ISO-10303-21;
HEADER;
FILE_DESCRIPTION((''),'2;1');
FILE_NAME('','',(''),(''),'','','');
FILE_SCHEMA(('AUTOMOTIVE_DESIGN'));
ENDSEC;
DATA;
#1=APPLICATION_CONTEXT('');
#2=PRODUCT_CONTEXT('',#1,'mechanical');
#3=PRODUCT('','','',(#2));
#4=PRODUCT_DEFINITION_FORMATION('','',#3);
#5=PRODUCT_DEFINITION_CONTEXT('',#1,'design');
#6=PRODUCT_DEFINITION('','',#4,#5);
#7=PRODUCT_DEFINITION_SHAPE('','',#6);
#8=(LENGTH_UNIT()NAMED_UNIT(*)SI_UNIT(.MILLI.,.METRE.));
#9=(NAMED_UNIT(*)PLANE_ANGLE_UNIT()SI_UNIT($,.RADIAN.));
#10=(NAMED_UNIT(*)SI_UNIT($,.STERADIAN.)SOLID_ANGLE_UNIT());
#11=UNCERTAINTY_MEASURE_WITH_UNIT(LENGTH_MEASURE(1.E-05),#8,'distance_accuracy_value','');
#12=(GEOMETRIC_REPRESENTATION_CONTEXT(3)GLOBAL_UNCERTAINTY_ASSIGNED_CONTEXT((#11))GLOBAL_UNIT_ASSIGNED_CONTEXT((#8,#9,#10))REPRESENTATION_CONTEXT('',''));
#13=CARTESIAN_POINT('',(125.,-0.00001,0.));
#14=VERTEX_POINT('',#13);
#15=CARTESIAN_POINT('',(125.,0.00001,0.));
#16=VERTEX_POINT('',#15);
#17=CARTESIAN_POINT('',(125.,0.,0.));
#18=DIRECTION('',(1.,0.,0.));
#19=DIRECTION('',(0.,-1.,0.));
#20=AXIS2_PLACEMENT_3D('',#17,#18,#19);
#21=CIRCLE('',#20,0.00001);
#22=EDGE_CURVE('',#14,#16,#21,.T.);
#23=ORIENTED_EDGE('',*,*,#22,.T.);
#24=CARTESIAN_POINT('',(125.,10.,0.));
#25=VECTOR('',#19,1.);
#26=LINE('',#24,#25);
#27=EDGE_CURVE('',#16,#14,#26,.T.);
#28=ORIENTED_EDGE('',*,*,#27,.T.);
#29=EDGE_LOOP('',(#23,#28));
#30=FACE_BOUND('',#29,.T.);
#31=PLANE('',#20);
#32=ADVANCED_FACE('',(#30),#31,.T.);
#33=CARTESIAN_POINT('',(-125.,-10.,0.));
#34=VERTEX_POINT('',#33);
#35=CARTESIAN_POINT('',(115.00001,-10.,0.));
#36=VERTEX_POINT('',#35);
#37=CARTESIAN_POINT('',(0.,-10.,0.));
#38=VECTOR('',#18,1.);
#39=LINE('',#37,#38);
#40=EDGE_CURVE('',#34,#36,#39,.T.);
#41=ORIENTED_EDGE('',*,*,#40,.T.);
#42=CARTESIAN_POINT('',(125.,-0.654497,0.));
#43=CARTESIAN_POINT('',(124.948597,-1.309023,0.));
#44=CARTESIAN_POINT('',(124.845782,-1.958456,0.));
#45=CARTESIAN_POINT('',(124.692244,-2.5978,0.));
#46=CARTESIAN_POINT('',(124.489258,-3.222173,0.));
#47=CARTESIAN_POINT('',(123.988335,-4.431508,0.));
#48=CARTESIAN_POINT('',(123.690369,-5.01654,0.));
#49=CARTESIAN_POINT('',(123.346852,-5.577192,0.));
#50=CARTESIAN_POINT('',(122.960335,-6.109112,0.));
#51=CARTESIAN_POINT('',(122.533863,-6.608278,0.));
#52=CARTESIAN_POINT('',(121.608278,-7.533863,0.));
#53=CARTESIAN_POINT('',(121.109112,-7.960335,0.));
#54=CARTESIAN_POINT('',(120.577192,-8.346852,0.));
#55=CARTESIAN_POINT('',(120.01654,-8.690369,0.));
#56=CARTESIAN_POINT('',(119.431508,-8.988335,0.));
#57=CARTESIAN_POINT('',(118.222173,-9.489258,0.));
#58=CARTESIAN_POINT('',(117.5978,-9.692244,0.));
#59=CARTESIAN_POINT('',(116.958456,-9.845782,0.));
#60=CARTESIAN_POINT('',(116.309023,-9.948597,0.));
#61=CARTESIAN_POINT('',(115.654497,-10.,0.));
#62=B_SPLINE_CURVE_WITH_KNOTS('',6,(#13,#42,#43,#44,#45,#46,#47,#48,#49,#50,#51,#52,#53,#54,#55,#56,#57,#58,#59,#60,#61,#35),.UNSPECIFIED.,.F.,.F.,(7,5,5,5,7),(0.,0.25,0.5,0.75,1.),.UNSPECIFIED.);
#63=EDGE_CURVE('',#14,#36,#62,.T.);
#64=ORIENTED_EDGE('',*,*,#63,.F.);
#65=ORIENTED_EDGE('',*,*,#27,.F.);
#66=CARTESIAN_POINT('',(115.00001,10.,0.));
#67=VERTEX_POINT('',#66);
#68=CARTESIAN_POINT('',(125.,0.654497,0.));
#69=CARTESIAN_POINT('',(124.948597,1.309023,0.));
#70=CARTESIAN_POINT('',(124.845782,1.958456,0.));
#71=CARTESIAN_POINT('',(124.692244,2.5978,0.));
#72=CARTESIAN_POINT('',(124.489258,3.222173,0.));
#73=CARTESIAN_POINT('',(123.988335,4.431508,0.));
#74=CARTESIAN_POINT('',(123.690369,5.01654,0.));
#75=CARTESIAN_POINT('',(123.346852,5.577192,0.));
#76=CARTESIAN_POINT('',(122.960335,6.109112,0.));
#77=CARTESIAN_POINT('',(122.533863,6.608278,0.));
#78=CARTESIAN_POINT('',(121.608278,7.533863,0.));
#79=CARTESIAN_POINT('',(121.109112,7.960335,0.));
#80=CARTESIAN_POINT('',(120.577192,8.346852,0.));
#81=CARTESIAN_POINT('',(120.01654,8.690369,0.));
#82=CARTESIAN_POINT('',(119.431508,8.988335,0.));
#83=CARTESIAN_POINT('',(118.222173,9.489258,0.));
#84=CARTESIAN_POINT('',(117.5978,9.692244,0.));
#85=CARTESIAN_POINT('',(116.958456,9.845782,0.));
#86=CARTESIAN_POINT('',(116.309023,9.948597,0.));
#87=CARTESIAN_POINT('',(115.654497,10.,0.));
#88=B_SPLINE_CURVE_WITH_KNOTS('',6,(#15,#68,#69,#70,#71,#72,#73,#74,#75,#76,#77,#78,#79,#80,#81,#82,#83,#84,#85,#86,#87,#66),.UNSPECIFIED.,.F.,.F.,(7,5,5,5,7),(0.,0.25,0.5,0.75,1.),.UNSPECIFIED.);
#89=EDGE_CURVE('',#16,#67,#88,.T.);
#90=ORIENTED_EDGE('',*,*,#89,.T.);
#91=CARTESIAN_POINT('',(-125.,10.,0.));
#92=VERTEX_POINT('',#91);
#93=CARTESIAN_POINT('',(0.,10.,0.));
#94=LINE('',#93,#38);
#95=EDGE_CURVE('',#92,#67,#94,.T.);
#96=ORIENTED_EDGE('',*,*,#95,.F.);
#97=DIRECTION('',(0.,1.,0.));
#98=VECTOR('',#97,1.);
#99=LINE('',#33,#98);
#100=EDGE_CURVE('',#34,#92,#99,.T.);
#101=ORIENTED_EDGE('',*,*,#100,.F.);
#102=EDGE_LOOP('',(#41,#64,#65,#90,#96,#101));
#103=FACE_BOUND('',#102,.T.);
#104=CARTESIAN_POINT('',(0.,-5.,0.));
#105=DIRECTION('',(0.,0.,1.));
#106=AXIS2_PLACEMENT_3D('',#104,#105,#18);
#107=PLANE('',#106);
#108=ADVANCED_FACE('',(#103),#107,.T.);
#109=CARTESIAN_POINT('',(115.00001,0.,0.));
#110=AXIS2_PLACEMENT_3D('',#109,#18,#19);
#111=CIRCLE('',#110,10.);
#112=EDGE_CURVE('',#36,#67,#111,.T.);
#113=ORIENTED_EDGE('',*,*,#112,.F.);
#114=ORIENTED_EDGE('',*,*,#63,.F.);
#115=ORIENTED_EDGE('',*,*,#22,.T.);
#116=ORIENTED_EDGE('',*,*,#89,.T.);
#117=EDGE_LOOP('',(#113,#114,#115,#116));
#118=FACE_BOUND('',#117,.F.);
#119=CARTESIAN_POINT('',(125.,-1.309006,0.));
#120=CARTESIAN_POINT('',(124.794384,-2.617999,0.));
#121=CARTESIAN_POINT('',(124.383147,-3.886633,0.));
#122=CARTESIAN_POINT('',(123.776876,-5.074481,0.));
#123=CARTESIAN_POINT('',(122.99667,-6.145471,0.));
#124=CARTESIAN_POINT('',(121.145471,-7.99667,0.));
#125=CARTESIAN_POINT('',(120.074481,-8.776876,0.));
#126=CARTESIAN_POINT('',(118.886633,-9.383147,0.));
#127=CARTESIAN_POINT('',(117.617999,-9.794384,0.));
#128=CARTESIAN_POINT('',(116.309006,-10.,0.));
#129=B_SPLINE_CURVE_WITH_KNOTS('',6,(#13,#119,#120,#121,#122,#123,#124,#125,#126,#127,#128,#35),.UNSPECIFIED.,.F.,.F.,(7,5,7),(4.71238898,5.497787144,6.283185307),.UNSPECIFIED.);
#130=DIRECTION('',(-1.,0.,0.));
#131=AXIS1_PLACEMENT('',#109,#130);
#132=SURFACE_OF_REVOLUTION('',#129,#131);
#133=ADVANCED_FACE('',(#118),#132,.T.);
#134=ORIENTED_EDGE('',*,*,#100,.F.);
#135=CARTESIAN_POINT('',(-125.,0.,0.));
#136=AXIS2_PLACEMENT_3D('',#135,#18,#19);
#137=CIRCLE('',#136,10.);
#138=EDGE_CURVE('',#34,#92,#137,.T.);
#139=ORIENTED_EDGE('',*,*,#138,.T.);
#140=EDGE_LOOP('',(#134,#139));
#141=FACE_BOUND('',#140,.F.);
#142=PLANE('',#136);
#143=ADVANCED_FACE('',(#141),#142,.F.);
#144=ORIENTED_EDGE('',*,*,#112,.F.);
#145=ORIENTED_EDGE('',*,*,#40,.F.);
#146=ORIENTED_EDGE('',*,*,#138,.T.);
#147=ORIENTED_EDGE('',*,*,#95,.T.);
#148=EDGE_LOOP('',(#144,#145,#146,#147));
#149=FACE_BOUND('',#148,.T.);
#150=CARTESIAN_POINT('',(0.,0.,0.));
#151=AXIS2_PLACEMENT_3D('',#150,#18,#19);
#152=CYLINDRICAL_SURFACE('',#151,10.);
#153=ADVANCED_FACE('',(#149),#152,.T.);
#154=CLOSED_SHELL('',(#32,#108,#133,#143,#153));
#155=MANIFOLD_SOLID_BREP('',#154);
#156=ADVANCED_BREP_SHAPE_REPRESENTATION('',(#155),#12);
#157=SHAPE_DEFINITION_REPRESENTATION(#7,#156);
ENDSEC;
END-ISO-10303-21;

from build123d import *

# Parameters (mm, degrees)
F0_W     = 250
F0_H     = 10
F1_ANGLE = 180
F2_R     = 9.99999


# Not quite as in the source:
# - a fillet or chamfer is up to 0.001 mm smaller than in the source, because OpenCascade refuses the exact size


with BuildPart() as f1:
    # F0 (on Top) → F1 (revolve)
    with BuildSketch(Plane.XY):
        with Locations((0, -5)):
            Rectangle(F0_W, F0_H)
    revolve(axis=Axis((0, 0, 0), (1, 0, 0)), revolution_arc=F1_ANGLE)

    # F2 (radius 10 in the source; OpenCascade refuses exactly that, so slightly less here)
    f2_edges = [f1.edges().sort_by_distance(p)[0] for p in [
        (125, 0, -10),
    ]]
    fillet(f2_edges, radius=F2_R)


solid = f1.part
